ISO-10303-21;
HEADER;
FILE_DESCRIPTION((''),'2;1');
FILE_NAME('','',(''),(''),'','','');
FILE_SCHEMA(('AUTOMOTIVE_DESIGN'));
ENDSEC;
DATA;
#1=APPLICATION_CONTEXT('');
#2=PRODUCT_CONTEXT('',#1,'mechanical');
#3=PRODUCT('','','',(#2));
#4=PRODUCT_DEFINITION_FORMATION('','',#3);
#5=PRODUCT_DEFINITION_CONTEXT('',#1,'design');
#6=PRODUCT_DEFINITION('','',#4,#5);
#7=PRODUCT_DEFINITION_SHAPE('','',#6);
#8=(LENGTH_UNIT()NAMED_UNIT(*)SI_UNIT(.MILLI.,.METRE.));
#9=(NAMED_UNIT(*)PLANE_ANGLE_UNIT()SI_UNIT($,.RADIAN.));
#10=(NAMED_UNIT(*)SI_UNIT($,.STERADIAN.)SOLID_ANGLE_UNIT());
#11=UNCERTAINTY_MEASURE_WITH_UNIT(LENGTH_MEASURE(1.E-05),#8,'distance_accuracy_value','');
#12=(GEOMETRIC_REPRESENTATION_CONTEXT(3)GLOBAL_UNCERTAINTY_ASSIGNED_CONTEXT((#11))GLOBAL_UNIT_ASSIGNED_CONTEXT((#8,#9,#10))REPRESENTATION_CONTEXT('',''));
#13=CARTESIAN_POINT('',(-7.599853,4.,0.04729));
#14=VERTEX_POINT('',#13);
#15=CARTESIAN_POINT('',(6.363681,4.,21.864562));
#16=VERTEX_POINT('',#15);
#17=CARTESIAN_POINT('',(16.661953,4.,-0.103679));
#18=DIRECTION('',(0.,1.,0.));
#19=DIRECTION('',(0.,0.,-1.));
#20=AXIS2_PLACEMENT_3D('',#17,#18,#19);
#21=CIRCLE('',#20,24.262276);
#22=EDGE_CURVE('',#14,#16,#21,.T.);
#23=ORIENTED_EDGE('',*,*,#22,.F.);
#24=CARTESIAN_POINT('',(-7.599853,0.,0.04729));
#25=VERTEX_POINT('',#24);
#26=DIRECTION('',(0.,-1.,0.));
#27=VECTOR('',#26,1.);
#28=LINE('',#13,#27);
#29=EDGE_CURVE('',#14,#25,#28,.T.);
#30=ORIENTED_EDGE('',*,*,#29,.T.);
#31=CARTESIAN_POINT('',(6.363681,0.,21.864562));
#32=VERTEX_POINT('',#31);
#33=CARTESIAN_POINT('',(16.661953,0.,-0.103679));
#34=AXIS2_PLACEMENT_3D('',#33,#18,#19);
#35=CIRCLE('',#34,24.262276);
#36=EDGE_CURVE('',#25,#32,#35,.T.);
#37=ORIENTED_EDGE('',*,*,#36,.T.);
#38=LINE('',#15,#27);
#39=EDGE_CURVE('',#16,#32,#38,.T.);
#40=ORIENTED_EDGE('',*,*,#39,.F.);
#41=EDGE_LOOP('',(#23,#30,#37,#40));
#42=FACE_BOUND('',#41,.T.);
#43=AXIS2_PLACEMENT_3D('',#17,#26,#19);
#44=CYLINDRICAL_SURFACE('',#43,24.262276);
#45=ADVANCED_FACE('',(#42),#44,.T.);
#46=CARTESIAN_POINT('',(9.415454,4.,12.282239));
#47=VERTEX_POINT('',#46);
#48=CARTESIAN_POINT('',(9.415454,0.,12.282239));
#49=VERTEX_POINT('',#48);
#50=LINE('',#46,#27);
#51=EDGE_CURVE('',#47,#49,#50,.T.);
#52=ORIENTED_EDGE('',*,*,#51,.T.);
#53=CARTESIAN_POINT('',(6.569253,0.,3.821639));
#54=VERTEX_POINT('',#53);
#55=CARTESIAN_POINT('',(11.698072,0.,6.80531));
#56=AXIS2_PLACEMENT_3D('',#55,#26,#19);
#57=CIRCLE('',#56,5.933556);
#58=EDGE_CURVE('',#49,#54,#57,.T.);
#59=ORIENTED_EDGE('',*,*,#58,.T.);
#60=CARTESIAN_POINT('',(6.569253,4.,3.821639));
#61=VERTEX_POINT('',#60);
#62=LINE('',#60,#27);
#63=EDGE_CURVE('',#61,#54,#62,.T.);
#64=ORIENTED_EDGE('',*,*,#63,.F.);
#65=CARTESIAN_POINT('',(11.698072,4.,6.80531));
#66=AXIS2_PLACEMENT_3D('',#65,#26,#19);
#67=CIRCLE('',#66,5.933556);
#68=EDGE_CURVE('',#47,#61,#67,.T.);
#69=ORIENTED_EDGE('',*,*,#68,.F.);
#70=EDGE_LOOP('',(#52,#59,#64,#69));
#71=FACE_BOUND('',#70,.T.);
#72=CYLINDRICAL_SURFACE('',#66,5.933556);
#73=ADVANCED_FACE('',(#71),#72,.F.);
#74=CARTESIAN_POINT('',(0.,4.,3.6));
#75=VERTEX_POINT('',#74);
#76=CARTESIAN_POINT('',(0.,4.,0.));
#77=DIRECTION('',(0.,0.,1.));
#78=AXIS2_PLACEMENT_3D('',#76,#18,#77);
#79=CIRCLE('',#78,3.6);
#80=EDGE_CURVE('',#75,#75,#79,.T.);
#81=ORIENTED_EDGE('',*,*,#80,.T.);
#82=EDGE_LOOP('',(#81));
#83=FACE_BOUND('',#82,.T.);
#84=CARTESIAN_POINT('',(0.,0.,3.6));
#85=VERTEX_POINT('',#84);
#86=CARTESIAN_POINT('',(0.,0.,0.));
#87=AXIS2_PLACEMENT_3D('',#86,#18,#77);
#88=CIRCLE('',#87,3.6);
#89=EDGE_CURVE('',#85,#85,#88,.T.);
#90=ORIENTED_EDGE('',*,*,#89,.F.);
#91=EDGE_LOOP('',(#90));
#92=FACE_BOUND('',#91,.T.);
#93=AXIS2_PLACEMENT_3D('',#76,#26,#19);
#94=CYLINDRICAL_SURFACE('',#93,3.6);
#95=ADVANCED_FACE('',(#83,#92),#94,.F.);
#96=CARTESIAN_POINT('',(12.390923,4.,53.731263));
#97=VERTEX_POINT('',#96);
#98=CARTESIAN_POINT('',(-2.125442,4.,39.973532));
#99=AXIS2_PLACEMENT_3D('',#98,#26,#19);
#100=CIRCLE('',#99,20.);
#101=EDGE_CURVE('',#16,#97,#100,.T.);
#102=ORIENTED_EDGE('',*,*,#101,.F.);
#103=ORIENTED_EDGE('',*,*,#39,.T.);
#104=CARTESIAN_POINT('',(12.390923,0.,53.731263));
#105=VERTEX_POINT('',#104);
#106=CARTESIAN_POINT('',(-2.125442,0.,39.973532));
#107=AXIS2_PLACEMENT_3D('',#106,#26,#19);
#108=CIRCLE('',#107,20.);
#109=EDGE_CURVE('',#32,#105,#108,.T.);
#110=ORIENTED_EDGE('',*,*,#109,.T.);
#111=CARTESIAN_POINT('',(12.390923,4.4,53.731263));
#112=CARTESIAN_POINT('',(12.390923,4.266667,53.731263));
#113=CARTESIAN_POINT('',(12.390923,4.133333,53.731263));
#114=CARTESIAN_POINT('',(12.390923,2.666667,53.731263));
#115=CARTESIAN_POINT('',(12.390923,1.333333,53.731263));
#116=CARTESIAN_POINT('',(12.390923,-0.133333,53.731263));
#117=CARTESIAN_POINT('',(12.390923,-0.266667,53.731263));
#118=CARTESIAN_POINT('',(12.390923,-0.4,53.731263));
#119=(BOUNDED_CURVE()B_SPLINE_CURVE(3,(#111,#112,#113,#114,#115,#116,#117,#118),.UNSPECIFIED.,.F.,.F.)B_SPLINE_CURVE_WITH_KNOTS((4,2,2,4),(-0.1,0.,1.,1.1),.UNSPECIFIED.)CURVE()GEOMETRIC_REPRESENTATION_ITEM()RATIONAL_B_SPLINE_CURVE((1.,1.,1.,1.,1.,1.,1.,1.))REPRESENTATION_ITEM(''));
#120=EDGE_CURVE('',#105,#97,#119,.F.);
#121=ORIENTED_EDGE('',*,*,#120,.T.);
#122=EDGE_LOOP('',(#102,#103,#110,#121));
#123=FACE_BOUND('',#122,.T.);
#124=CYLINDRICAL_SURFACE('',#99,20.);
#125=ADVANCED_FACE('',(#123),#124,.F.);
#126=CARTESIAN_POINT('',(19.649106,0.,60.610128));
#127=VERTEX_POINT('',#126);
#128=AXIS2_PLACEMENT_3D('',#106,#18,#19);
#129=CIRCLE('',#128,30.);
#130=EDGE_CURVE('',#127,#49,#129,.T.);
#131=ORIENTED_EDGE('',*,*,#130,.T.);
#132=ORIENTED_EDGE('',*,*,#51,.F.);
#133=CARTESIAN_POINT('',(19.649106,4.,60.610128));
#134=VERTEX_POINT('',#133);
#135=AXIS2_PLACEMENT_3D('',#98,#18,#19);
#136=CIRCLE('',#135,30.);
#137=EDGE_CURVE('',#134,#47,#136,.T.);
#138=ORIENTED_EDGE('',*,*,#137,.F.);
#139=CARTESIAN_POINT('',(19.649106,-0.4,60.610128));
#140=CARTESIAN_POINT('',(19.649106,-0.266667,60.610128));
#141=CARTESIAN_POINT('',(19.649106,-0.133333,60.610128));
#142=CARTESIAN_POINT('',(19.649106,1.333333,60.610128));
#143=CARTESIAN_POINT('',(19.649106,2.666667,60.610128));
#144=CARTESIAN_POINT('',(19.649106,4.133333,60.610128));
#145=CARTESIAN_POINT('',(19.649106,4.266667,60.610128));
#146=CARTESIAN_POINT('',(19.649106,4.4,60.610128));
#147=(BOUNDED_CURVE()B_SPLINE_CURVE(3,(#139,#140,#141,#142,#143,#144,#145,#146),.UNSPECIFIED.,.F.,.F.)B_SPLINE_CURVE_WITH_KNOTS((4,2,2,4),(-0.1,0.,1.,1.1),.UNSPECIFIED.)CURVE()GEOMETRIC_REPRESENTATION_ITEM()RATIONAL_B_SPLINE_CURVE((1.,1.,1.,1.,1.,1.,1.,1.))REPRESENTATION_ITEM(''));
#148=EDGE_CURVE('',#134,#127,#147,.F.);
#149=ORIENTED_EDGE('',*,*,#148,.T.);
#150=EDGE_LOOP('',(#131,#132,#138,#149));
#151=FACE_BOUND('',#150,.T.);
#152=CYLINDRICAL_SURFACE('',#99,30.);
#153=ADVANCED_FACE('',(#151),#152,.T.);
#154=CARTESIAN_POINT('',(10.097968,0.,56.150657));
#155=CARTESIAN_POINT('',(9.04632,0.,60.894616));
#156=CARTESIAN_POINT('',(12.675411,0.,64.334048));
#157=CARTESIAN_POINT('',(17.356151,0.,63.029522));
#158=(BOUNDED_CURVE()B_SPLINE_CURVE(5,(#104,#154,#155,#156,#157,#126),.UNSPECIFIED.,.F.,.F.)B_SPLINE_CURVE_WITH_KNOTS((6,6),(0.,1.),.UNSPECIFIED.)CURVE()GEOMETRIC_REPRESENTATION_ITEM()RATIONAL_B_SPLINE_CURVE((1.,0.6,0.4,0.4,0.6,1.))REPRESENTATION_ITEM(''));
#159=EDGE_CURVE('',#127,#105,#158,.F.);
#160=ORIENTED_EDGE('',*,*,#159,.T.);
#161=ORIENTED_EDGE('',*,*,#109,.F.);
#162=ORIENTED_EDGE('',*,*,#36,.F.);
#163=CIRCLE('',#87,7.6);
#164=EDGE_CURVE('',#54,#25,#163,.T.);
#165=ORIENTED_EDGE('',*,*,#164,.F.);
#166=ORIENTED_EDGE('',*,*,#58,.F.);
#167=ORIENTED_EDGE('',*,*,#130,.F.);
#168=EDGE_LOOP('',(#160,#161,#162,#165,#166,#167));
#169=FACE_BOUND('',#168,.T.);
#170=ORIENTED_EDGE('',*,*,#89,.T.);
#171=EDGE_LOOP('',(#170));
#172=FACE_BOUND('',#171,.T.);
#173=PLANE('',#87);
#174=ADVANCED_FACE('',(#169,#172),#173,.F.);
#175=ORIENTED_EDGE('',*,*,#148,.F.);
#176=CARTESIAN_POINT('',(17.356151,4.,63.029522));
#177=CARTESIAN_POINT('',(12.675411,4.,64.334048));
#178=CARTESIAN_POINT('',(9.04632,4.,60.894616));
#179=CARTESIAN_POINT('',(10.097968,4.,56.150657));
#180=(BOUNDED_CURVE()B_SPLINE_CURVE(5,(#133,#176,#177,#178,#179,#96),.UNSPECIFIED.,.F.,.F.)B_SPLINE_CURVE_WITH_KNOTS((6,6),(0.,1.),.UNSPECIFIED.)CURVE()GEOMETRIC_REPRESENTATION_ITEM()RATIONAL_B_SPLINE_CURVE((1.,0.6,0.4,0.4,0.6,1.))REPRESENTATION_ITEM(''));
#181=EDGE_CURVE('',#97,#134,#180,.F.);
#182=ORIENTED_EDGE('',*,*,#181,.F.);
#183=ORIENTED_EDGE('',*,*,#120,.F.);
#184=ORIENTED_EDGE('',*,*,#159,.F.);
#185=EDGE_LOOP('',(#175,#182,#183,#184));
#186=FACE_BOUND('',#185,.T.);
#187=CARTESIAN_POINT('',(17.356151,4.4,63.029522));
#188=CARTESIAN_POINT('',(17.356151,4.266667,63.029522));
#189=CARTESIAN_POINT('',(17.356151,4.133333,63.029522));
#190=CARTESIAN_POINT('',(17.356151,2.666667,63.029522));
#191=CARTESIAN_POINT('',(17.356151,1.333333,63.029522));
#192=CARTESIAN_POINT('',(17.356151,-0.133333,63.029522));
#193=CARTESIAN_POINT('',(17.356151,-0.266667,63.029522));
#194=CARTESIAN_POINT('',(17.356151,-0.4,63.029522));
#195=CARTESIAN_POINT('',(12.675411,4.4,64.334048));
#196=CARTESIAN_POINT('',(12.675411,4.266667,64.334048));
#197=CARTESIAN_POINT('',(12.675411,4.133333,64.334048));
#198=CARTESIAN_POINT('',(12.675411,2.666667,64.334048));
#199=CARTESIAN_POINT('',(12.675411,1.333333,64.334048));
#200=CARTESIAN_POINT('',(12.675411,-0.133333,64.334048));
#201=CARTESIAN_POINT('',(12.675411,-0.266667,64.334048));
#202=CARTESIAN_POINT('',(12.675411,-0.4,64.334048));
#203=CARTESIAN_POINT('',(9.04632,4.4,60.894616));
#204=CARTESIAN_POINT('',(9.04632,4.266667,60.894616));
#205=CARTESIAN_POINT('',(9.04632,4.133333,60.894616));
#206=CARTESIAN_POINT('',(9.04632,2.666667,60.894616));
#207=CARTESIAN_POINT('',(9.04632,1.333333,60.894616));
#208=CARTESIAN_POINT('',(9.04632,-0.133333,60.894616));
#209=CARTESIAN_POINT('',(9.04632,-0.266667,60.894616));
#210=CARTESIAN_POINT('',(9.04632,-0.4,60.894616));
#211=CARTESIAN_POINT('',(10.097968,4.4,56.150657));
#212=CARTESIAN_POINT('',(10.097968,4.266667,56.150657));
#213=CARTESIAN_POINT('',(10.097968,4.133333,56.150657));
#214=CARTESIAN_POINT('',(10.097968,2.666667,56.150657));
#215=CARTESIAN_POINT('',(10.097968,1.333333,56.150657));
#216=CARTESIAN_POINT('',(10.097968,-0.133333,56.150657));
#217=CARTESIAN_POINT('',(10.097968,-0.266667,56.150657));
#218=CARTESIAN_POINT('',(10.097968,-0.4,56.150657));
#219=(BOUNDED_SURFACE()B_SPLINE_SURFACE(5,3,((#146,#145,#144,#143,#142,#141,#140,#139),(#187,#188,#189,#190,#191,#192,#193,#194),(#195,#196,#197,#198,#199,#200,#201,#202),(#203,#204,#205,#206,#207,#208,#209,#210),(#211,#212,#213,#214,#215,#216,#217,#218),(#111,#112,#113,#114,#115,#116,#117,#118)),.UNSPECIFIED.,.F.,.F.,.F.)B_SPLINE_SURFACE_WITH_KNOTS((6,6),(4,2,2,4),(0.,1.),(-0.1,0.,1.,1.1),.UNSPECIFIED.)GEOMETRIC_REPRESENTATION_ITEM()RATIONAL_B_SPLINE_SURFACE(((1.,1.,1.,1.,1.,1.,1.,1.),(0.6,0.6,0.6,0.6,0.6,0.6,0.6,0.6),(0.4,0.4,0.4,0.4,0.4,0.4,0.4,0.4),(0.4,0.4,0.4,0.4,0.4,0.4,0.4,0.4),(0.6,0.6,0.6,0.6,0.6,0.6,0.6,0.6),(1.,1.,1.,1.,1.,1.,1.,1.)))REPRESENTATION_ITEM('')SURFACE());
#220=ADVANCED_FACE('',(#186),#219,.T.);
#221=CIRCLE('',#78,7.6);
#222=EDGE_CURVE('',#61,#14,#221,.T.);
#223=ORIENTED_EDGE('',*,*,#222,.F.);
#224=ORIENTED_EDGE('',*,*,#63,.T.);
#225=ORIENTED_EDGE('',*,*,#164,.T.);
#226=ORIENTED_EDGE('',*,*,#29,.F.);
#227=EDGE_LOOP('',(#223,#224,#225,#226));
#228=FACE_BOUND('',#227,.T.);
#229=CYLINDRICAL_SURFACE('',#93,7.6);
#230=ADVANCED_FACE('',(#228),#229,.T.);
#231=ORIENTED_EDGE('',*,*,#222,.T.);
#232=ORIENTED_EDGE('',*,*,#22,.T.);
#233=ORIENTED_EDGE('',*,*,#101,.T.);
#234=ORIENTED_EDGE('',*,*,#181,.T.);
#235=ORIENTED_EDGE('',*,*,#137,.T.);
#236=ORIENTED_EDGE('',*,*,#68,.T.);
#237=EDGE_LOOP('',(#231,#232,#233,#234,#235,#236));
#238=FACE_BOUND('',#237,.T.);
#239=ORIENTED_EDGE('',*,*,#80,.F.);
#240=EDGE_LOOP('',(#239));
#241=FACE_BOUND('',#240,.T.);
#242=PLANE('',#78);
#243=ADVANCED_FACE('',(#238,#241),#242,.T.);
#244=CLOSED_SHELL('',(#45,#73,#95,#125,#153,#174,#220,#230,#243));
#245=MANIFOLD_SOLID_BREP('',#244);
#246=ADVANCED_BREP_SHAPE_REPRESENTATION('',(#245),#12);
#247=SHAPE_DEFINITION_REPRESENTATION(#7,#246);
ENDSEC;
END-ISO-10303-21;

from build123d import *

# Parameters (mm, degrees)
SKETCH1_R           = 3.6
BOSS_EXTRUDE1_DEPTH = 4
FILLET1_DEPTH       = 4


with BuildPart() as part:
    # Sketch1 → Boss-Extrude1 (new body)
    with BuildSketch(Plane(origin=(0, 0, 0), x_dir=(1, 0, 0), z_dir=(0, 1, 0))):
        with BuildLine():
            Line((9.346086984, -56.356572977), (15.081851343, -64.548093422))
            ThreePointArc((15.081851343, -64.548093422), (27.699790534, -36.740032424), (9.415453774, -12.282238674))
            ThreePointArc((9.415453774, -12.282238674), (6.074212989, -8.697213495), (6.569252548, -3.821638518))
            ThreePointArc((6.569252548, -3.821638518), (1.956261977, 7.343911701), (-7.599852871, -0.04729001))
            ThreePointArc((-7.599852871, -0.04729001), (-3.773263774, -12.975309302), (6.3636811, -21.864562113))
            ThreePointArc((6.3636811, -21.864562113), (17.800210223, -38.250629299), (9.346086984, -56.356572977))
        make_face()
        with Locations(Location((0, 0, 0), (0, 0, 270))):
            Circle(SKETCH1_R, mode=Mode.SUBTRACT)
    extrude(amount=BOSS_EXTRUDE1_DEPTH)

    # Fillet1: read off the stored shape, not the designer's step
    # Fillet1 outline → Fillet1 (cut)
    with BuildSketch(Plane(origin=(0, 0, 0), x_dir=(1, 0, 0), z_dir=(0, 1, 0))):
        with BuildLine():
            ThreePointArc((15.081851343, -64.548093422), (17.464679897, -62.694164436), (19.649105693, -60.610127838))
            add(Edge.make_bspline(
                [(19.649105693, -60.610127838), (18.677855173, -61.634935456), (17.188222286, -62.496348841), (15.223722909, -62.743763995), (13.23213393, -61.906423138), (11.924254263, -60.03857744)],
                knots=[0, 0, 0, 0, 0, 0, 0.550510254, 0.550510254, 0.550510254, 0.550510254, 0.550510254, 0.550510254], degree=5, weights=[1, 0.779795898, 0.620204104, 0.521224619, 0.482857441, 0.505102571]))
            Line((11.924254263, -60.03857744), (15.081851343, -64.548093422))
        make_face()
        with BuildLine():
            Line((9.346086984, -56.356572977), (11.924254263, -60.03857744))
            add(Edge.make_bspline(
                [(11.924254263, -60.03857744), (10.93883994, -58.631259971), (10.675135711, -57.05607025), (10.993827945, -55.636809597), (11.636969564, -54.526791063), (12.390923216, -53.731262588)],
                knots=[0.550510254, 0.550510254, 0.550510254, 0.550510254, 0.550510254, 0.550510254, 1, 1, 1, 1, 1, 1], degree=5, weights=[0.505102571, 0.523265645, 0.581836924, 0.68081641, 0.820204102, 1]))
            ThreePointArc((12.390923216, -53.731262588), (10.934639353, -55.12062032), (9.346086984, -56.356572977))
        make_face()
    extrude(amount=FILLET1_DEPTH, mode=Mode.SUBTRACT)


solid = part.part
